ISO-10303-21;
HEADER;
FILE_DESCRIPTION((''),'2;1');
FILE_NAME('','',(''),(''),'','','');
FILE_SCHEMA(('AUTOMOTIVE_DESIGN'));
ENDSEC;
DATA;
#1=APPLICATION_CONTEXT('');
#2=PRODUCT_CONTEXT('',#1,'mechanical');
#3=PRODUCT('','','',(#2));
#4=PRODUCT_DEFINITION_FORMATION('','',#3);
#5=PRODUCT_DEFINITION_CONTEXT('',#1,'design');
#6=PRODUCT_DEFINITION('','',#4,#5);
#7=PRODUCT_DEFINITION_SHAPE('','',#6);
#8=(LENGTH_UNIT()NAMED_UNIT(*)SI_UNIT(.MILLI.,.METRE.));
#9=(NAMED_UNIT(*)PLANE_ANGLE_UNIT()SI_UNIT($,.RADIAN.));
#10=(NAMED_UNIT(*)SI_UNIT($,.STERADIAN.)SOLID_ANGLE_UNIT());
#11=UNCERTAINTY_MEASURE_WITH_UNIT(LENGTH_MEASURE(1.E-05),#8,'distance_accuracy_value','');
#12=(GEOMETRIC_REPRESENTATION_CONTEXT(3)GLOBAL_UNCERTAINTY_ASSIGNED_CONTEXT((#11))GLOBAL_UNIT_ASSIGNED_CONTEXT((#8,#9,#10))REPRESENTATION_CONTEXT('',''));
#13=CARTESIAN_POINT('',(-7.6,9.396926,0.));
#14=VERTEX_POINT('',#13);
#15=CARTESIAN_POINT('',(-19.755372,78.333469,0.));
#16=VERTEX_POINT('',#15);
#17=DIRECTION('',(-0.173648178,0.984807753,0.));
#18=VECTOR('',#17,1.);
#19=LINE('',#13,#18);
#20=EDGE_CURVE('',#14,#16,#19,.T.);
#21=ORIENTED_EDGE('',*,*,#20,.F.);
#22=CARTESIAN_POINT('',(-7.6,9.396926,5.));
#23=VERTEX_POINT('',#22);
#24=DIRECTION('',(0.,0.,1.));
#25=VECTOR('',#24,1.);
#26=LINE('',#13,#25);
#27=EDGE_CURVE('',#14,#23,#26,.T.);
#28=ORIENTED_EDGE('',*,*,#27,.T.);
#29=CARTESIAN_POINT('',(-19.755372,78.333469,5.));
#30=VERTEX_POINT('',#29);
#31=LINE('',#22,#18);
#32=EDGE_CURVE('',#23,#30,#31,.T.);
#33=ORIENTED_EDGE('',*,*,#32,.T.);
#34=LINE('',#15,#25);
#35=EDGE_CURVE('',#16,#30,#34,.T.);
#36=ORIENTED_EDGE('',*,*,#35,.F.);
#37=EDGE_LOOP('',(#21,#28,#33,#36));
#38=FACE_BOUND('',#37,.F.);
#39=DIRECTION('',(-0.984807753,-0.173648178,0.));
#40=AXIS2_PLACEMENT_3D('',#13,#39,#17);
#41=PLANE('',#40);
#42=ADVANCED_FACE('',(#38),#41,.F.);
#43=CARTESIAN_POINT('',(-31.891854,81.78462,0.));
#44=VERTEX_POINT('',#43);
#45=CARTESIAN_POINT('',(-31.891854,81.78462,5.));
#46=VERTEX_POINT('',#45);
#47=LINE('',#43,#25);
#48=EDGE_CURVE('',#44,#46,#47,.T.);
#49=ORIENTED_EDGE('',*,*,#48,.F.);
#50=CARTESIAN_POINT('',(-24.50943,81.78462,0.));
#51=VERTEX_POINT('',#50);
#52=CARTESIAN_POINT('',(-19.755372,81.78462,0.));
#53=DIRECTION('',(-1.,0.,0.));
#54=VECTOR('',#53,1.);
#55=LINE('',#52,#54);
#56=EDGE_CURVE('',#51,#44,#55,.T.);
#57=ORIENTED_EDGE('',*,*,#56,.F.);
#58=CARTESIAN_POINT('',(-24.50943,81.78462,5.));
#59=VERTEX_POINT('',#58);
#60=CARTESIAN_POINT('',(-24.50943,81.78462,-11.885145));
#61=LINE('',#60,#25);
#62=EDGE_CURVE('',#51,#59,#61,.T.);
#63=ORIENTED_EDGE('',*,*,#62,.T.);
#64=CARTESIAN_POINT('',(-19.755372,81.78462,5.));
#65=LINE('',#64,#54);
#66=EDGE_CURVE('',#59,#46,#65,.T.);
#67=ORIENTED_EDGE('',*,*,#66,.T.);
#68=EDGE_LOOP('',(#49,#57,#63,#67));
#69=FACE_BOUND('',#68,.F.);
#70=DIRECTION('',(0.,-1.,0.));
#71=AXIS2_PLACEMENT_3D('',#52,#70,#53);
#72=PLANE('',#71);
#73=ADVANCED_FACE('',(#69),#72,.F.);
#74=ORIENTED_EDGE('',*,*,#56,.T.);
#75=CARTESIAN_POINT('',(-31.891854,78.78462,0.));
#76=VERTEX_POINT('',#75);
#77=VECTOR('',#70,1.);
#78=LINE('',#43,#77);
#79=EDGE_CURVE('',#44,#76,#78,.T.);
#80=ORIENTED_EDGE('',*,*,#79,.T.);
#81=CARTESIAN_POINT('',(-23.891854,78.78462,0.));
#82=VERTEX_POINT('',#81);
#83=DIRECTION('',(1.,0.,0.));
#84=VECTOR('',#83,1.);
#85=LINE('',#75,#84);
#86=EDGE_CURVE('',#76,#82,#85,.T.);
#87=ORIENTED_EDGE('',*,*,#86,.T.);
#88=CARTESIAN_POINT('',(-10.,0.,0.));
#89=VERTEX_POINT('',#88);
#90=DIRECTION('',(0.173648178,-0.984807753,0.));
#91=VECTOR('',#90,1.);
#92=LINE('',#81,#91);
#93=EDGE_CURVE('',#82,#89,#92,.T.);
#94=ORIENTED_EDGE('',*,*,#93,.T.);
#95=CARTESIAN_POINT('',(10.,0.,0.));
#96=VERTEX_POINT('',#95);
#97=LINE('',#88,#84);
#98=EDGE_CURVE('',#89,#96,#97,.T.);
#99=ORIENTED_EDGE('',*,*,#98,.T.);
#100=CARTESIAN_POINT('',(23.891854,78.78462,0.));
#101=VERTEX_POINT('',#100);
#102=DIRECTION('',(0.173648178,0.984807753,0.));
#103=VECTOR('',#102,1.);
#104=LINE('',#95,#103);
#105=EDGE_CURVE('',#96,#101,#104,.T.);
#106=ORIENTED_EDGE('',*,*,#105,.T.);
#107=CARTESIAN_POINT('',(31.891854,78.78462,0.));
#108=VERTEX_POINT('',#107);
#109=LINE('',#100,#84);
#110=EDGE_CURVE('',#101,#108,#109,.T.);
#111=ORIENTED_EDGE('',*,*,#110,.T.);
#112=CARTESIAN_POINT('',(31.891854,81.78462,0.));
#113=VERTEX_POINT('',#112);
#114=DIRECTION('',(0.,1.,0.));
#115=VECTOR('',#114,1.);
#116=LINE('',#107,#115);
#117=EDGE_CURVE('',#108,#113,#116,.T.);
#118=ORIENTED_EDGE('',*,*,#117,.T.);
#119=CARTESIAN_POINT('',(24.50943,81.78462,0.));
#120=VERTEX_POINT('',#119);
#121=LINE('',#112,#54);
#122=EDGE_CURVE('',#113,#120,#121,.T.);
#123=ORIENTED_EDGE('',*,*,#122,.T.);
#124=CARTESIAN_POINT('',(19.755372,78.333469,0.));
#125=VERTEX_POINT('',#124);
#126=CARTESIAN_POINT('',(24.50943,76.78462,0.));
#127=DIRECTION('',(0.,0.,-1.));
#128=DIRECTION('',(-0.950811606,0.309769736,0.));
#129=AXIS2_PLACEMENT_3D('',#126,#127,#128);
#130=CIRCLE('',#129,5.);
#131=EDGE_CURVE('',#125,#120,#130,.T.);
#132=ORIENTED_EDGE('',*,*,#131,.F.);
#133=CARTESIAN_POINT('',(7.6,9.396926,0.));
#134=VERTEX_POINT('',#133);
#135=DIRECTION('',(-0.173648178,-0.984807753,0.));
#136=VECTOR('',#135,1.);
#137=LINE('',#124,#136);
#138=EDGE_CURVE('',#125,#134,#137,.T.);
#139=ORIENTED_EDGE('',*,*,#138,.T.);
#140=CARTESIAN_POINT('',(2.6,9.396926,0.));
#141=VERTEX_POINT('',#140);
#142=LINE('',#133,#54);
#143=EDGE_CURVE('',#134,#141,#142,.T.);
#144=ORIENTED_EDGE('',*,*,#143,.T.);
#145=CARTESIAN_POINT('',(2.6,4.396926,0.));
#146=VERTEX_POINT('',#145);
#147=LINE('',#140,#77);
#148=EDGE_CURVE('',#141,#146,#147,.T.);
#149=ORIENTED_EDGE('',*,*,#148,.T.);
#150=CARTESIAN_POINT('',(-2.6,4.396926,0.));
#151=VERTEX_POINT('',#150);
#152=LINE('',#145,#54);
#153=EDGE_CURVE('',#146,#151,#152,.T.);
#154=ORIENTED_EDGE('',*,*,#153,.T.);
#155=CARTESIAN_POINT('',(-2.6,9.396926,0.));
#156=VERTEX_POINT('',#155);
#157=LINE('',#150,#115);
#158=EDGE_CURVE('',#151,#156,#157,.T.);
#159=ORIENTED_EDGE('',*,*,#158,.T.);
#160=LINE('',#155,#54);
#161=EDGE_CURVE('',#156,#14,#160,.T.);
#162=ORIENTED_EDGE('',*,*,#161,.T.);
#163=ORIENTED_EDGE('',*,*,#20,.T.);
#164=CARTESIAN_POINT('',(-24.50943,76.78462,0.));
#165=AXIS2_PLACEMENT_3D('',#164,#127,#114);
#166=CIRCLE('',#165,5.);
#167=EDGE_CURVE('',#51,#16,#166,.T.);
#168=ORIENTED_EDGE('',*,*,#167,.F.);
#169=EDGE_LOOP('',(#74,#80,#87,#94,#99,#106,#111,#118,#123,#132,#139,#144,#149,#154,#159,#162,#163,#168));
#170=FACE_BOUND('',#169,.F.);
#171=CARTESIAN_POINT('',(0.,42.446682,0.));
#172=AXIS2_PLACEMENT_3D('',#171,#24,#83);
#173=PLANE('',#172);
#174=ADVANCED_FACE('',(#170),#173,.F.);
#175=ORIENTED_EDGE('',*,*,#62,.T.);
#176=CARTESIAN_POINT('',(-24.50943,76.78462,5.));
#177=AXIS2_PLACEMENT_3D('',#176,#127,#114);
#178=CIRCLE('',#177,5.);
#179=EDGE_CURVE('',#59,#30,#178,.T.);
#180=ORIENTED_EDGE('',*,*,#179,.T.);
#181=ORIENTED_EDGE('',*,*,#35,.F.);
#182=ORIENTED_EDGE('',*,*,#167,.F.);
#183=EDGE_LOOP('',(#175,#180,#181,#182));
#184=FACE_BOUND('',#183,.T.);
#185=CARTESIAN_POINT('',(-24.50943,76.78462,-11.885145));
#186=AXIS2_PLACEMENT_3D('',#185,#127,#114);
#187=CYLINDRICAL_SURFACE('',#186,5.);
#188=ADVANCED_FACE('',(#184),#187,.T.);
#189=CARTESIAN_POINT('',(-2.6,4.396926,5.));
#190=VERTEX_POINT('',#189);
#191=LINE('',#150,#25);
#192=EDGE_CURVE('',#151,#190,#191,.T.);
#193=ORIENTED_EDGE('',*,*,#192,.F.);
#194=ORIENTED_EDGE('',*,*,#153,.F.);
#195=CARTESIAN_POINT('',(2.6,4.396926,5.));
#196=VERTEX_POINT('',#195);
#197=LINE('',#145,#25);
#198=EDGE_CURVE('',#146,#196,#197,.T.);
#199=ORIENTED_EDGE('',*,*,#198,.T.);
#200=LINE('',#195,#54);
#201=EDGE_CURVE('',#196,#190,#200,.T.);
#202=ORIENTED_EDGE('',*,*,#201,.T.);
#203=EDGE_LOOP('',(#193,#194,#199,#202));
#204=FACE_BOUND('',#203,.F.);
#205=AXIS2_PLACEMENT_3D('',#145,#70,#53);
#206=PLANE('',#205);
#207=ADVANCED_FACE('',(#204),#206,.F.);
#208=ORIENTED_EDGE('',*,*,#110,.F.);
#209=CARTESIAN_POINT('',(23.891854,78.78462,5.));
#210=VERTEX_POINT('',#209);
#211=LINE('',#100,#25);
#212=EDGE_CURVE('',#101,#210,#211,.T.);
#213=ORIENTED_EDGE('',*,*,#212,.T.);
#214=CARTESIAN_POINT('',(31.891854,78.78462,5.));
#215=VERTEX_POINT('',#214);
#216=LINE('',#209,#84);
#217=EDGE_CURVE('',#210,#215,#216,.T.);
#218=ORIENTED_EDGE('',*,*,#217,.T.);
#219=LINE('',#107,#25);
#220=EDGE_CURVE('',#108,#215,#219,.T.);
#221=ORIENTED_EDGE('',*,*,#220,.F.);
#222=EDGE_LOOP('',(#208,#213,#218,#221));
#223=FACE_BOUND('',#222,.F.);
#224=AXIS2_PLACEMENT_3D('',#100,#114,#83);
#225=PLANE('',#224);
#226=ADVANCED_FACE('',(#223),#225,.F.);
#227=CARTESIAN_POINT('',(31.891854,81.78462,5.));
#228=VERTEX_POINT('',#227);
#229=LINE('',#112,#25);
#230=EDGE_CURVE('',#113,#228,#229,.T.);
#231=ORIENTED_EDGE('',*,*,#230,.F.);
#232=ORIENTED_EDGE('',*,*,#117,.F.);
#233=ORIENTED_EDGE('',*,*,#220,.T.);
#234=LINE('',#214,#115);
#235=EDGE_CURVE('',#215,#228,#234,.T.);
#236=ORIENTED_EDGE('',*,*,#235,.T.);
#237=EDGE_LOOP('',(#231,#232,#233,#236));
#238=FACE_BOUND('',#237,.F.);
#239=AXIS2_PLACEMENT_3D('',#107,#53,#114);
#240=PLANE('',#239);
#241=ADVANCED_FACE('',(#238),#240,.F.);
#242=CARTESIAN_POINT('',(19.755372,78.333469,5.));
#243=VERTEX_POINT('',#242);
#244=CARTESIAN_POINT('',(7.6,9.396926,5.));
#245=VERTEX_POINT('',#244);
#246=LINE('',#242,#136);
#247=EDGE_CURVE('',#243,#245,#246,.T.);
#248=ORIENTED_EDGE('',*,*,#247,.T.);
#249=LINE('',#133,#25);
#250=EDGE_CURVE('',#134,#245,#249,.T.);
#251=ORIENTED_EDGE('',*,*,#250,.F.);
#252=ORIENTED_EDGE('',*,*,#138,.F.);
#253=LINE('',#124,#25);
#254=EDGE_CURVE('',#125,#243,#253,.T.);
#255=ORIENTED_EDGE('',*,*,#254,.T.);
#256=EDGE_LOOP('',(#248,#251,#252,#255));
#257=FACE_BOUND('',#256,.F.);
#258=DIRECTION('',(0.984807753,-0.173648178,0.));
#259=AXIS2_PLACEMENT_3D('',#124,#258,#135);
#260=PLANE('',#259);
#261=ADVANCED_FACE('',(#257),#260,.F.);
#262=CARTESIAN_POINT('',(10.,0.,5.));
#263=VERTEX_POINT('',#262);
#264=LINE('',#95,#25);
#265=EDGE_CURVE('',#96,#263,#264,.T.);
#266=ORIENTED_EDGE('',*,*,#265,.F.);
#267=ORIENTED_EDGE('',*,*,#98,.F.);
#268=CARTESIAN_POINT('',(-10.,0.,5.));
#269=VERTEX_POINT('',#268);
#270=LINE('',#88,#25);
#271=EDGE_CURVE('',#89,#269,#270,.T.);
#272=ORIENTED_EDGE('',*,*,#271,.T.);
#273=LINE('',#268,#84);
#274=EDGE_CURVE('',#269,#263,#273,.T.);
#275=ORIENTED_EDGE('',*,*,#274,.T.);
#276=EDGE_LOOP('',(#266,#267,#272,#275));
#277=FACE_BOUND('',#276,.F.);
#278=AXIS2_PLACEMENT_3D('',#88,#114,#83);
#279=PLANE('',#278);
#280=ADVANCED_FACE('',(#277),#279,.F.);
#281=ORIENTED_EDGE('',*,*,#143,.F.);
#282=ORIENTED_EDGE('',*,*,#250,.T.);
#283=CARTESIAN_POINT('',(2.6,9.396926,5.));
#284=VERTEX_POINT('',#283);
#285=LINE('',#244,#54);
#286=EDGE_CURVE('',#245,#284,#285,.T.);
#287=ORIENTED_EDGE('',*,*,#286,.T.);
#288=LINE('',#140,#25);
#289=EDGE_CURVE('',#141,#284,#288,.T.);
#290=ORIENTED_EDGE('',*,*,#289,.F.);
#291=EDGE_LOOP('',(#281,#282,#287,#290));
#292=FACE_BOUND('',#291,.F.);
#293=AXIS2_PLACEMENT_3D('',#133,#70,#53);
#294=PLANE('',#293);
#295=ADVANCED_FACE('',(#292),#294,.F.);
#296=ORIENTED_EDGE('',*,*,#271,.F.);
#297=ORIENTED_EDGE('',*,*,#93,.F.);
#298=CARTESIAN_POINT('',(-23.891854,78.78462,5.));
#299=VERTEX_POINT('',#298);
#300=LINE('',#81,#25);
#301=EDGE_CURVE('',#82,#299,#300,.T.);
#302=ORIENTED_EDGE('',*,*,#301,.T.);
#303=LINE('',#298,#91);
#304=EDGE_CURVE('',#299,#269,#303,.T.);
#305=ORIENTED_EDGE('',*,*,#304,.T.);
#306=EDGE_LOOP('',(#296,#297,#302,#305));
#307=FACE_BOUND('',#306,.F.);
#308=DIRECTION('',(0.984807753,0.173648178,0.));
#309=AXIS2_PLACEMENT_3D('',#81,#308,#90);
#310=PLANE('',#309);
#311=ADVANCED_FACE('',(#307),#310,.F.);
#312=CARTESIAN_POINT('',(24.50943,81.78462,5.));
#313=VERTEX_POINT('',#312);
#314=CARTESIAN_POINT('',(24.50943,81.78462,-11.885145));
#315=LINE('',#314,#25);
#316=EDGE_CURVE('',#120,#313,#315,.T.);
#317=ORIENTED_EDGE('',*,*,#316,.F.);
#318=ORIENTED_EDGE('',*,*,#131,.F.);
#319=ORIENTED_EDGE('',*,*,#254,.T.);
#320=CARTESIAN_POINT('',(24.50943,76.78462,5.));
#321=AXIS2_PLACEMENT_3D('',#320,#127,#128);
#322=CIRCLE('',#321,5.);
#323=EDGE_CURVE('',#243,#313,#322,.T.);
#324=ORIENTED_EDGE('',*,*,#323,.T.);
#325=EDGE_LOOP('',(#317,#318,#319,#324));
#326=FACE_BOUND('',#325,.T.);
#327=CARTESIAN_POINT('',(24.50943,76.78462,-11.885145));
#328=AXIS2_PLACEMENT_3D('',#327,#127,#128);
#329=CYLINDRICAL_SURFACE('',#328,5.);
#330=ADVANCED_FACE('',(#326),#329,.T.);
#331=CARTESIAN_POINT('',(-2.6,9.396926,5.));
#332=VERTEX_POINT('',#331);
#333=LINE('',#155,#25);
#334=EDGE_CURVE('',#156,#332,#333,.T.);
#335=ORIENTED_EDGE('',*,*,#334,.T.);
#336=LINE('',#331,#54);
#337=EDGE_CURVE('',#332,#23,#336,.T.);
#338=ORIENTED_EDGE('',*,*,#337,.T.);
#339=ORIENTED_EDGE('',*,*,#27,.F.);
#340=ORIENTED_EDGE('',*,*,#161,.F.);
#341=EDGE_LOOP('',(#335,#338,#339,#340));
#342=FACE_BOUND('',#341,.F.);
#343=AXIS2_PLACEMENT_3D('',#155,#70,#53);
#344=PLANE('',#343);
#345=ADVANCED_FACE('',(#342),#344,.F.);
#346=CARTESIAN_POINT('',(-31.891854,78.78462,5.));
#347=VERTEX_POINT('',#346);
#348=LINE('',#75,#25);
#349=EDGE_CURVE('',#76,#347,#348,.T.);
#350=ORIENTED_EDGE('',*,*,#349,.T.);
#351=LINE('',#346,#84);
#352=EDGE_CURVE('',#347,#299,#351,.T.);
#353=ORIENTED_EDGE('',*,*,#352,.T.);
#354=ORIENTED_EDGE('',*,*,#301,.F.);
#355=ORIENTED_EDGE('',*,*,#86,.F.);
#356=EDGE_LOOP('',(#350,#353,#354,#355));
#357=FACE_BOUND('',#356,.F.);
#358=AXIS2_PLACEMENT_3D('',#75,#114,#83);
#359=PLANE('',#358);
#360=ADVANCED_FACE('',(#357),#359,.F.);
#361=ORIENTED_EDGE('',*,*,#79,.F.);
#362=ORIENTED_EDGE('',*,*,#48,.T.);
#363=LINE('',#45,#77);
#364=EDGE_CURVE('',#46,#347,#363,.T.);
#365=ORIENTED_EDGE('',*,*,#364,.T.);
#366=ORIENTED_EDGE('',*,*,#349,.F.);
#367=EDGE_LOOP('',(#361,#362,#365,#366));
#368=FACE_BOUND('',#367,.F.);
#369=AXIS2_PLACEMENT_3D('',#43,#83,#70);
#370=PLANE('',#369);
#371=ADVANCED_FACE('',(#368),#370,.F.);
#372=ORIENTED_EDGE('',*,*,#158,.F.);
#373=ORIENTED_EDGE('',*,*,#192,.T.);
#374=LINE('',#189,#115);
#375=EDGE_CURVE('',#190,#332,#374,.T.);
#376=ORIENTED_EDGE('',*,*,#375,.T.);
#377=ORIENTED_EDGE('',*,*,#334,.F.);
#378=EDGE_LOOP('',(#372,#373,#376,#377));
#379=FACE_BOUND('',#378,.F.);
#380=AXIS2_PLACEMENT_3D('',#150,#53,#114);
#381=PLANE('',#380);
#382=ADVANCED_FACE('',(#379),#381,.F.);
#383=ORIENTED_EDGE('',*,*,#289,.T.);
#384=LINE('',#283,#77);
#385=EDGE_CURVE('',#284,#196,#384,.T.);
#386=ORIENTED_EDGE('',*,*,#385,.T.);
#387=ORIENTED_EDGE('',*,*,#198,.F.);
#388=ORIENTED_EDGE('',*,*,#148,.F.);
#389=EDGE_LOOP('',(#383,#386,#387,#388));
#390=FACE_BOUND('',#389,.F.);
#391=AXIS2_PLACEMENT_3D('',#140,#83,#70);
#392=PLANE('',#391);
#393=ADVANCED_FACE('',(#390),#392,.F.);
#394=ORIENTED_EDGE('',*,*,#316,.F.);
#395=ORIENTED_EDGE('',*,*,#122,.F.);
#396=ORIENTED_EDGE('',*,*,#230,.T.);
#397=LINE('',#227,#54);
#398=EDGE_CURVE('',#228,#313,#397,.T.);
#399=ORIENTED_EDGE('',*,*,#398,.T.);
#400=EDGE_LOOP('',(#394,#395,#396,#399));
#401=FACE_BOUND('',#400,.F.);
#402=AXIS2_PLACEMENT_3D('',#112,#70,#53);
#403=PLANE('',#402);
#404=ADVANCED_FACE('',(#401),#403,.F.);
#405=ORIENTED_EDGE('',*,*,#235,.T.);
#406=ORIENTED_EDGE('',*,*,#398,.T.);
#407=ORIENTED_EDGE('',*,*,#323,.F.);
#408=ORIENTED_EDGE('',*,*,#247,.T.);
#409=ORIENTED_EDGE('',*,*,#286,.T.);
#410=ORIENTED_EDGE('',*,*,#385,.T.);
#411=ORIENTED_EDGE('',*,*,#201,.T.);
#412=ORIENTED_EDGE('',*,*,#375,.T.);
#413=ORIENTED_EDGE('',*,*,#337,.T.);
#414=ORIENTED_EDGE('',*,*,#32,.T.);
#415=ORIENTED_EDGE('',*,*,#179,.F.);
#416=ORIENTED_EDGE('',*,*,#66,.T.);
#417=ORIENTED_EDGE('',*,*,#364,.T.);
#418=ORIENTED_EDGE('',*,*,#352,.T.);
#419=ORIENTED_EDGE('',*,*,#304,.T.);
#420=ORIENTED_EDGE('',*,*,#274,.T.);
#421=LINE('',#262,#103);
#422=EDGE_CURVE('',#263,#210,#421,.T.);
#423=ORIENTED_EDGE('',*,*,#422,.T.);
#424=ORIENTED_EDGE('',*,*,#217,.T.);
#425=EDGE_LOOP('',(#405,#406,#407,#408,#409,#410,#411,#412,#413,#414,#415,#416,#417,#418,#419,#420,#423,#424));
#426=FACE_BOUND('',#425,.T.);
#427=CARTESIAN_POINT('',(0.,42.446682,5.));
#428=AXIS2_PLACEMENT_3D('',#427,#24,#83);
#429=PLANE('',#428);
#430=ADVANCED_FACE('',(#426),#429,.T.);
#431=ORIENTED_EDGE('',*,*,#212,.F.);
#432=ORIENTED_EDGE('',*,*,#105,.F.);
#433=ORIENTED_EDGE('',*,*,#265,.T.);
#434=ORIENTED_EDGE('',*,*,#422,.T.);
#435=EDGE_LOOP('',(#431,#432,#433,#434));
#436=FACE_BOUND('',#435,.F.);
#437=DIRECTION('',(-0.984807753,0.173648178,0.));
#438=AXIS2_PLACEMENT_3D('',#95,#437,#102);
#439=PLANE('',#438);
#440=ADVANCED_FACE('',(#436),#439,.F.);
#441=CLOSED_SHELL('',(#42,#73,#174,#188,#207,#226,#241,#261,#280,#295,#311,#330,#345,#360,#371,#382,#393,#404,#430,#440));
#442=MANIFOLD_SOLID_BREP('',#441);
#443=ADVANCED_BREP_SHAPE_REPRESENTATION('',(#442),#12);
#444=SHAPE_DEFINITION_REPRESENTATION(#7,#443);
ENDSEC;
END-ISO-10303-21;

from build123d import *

# Parameters (mm, degrees)
F1_DEPTH    = 5
F2_T1_DEPTH = 28.770290161


# Not quite as in the source:
# - a fillet or chamfer that OpenCascade refuses, or shapes differently, is made with other operations: its cross-section is extruded or revolved along the edge and cut away or added


with BuildPart() as f1:
    # F0 (on Top) → F1 (new body)
    with BuildSketch(Plane.XY):
        Polygon((-10, 0), (0, 0), (10, 0), (23.8918542134, 78.784620241), (31.8918542134, 78.784620241), (31.8918542134, 81.784620241), (19.7553724367, 81.784620241), (19.7553724367, 78.3334689187), (7.6, 9.3969262079), (2.6, 9.3969262079), (2.6, 4.3969262079), (0, 4.3969262079), (-2.6, 4.3969262079), (-2.6, 9.3969262079), (-7.6, 9.3969262079), (-19.7553724367, 78.3334689187), (-19.7553724367, 81.784620241), (-31.8918542134, 81.784620241), (-31.8918542134, 78.784620241), (-23.8918542134, 78.784620241), align=None)
    extrude(amount=F1_DEPTH)

    # F2: fillet of radius 5 on 2 edges, made by hand

    # F2_s2 → F2_t1 (cut)
    with BuildSketch(Plane.XY.offset(-11.8851450805)):
        with BuildLine():
            ThreePointArc((-24.5094304689, 81.784620241), (-21.5721054433, 80.8308680948), (-19.7553724367, 78.3334689187))
            Line((-19.7553724367, 78.3334689187), (-19.7553724367, 81.784620241))
            Line((-19.7553724367, 81.784620241), (-24.5094304689, 81.784620241))
        make_face()
        with BuildLine():
            ThreePointArc((19.7553724367, 78.3334689187), (21.5721054433, 80.8308680948), (24.5094304689, 81.784620241))
            Line((24.5094304689, 81.784620241), (19.7553724367, 81.784620241))
            Line((19.7553724367, 81.784620241), (19.7553724367, 78.3334689187))
        make_face()
    extrude(amount=F2_T1_DEPTH, mode=Mode.SUBTRACT)


solid = f1.part
